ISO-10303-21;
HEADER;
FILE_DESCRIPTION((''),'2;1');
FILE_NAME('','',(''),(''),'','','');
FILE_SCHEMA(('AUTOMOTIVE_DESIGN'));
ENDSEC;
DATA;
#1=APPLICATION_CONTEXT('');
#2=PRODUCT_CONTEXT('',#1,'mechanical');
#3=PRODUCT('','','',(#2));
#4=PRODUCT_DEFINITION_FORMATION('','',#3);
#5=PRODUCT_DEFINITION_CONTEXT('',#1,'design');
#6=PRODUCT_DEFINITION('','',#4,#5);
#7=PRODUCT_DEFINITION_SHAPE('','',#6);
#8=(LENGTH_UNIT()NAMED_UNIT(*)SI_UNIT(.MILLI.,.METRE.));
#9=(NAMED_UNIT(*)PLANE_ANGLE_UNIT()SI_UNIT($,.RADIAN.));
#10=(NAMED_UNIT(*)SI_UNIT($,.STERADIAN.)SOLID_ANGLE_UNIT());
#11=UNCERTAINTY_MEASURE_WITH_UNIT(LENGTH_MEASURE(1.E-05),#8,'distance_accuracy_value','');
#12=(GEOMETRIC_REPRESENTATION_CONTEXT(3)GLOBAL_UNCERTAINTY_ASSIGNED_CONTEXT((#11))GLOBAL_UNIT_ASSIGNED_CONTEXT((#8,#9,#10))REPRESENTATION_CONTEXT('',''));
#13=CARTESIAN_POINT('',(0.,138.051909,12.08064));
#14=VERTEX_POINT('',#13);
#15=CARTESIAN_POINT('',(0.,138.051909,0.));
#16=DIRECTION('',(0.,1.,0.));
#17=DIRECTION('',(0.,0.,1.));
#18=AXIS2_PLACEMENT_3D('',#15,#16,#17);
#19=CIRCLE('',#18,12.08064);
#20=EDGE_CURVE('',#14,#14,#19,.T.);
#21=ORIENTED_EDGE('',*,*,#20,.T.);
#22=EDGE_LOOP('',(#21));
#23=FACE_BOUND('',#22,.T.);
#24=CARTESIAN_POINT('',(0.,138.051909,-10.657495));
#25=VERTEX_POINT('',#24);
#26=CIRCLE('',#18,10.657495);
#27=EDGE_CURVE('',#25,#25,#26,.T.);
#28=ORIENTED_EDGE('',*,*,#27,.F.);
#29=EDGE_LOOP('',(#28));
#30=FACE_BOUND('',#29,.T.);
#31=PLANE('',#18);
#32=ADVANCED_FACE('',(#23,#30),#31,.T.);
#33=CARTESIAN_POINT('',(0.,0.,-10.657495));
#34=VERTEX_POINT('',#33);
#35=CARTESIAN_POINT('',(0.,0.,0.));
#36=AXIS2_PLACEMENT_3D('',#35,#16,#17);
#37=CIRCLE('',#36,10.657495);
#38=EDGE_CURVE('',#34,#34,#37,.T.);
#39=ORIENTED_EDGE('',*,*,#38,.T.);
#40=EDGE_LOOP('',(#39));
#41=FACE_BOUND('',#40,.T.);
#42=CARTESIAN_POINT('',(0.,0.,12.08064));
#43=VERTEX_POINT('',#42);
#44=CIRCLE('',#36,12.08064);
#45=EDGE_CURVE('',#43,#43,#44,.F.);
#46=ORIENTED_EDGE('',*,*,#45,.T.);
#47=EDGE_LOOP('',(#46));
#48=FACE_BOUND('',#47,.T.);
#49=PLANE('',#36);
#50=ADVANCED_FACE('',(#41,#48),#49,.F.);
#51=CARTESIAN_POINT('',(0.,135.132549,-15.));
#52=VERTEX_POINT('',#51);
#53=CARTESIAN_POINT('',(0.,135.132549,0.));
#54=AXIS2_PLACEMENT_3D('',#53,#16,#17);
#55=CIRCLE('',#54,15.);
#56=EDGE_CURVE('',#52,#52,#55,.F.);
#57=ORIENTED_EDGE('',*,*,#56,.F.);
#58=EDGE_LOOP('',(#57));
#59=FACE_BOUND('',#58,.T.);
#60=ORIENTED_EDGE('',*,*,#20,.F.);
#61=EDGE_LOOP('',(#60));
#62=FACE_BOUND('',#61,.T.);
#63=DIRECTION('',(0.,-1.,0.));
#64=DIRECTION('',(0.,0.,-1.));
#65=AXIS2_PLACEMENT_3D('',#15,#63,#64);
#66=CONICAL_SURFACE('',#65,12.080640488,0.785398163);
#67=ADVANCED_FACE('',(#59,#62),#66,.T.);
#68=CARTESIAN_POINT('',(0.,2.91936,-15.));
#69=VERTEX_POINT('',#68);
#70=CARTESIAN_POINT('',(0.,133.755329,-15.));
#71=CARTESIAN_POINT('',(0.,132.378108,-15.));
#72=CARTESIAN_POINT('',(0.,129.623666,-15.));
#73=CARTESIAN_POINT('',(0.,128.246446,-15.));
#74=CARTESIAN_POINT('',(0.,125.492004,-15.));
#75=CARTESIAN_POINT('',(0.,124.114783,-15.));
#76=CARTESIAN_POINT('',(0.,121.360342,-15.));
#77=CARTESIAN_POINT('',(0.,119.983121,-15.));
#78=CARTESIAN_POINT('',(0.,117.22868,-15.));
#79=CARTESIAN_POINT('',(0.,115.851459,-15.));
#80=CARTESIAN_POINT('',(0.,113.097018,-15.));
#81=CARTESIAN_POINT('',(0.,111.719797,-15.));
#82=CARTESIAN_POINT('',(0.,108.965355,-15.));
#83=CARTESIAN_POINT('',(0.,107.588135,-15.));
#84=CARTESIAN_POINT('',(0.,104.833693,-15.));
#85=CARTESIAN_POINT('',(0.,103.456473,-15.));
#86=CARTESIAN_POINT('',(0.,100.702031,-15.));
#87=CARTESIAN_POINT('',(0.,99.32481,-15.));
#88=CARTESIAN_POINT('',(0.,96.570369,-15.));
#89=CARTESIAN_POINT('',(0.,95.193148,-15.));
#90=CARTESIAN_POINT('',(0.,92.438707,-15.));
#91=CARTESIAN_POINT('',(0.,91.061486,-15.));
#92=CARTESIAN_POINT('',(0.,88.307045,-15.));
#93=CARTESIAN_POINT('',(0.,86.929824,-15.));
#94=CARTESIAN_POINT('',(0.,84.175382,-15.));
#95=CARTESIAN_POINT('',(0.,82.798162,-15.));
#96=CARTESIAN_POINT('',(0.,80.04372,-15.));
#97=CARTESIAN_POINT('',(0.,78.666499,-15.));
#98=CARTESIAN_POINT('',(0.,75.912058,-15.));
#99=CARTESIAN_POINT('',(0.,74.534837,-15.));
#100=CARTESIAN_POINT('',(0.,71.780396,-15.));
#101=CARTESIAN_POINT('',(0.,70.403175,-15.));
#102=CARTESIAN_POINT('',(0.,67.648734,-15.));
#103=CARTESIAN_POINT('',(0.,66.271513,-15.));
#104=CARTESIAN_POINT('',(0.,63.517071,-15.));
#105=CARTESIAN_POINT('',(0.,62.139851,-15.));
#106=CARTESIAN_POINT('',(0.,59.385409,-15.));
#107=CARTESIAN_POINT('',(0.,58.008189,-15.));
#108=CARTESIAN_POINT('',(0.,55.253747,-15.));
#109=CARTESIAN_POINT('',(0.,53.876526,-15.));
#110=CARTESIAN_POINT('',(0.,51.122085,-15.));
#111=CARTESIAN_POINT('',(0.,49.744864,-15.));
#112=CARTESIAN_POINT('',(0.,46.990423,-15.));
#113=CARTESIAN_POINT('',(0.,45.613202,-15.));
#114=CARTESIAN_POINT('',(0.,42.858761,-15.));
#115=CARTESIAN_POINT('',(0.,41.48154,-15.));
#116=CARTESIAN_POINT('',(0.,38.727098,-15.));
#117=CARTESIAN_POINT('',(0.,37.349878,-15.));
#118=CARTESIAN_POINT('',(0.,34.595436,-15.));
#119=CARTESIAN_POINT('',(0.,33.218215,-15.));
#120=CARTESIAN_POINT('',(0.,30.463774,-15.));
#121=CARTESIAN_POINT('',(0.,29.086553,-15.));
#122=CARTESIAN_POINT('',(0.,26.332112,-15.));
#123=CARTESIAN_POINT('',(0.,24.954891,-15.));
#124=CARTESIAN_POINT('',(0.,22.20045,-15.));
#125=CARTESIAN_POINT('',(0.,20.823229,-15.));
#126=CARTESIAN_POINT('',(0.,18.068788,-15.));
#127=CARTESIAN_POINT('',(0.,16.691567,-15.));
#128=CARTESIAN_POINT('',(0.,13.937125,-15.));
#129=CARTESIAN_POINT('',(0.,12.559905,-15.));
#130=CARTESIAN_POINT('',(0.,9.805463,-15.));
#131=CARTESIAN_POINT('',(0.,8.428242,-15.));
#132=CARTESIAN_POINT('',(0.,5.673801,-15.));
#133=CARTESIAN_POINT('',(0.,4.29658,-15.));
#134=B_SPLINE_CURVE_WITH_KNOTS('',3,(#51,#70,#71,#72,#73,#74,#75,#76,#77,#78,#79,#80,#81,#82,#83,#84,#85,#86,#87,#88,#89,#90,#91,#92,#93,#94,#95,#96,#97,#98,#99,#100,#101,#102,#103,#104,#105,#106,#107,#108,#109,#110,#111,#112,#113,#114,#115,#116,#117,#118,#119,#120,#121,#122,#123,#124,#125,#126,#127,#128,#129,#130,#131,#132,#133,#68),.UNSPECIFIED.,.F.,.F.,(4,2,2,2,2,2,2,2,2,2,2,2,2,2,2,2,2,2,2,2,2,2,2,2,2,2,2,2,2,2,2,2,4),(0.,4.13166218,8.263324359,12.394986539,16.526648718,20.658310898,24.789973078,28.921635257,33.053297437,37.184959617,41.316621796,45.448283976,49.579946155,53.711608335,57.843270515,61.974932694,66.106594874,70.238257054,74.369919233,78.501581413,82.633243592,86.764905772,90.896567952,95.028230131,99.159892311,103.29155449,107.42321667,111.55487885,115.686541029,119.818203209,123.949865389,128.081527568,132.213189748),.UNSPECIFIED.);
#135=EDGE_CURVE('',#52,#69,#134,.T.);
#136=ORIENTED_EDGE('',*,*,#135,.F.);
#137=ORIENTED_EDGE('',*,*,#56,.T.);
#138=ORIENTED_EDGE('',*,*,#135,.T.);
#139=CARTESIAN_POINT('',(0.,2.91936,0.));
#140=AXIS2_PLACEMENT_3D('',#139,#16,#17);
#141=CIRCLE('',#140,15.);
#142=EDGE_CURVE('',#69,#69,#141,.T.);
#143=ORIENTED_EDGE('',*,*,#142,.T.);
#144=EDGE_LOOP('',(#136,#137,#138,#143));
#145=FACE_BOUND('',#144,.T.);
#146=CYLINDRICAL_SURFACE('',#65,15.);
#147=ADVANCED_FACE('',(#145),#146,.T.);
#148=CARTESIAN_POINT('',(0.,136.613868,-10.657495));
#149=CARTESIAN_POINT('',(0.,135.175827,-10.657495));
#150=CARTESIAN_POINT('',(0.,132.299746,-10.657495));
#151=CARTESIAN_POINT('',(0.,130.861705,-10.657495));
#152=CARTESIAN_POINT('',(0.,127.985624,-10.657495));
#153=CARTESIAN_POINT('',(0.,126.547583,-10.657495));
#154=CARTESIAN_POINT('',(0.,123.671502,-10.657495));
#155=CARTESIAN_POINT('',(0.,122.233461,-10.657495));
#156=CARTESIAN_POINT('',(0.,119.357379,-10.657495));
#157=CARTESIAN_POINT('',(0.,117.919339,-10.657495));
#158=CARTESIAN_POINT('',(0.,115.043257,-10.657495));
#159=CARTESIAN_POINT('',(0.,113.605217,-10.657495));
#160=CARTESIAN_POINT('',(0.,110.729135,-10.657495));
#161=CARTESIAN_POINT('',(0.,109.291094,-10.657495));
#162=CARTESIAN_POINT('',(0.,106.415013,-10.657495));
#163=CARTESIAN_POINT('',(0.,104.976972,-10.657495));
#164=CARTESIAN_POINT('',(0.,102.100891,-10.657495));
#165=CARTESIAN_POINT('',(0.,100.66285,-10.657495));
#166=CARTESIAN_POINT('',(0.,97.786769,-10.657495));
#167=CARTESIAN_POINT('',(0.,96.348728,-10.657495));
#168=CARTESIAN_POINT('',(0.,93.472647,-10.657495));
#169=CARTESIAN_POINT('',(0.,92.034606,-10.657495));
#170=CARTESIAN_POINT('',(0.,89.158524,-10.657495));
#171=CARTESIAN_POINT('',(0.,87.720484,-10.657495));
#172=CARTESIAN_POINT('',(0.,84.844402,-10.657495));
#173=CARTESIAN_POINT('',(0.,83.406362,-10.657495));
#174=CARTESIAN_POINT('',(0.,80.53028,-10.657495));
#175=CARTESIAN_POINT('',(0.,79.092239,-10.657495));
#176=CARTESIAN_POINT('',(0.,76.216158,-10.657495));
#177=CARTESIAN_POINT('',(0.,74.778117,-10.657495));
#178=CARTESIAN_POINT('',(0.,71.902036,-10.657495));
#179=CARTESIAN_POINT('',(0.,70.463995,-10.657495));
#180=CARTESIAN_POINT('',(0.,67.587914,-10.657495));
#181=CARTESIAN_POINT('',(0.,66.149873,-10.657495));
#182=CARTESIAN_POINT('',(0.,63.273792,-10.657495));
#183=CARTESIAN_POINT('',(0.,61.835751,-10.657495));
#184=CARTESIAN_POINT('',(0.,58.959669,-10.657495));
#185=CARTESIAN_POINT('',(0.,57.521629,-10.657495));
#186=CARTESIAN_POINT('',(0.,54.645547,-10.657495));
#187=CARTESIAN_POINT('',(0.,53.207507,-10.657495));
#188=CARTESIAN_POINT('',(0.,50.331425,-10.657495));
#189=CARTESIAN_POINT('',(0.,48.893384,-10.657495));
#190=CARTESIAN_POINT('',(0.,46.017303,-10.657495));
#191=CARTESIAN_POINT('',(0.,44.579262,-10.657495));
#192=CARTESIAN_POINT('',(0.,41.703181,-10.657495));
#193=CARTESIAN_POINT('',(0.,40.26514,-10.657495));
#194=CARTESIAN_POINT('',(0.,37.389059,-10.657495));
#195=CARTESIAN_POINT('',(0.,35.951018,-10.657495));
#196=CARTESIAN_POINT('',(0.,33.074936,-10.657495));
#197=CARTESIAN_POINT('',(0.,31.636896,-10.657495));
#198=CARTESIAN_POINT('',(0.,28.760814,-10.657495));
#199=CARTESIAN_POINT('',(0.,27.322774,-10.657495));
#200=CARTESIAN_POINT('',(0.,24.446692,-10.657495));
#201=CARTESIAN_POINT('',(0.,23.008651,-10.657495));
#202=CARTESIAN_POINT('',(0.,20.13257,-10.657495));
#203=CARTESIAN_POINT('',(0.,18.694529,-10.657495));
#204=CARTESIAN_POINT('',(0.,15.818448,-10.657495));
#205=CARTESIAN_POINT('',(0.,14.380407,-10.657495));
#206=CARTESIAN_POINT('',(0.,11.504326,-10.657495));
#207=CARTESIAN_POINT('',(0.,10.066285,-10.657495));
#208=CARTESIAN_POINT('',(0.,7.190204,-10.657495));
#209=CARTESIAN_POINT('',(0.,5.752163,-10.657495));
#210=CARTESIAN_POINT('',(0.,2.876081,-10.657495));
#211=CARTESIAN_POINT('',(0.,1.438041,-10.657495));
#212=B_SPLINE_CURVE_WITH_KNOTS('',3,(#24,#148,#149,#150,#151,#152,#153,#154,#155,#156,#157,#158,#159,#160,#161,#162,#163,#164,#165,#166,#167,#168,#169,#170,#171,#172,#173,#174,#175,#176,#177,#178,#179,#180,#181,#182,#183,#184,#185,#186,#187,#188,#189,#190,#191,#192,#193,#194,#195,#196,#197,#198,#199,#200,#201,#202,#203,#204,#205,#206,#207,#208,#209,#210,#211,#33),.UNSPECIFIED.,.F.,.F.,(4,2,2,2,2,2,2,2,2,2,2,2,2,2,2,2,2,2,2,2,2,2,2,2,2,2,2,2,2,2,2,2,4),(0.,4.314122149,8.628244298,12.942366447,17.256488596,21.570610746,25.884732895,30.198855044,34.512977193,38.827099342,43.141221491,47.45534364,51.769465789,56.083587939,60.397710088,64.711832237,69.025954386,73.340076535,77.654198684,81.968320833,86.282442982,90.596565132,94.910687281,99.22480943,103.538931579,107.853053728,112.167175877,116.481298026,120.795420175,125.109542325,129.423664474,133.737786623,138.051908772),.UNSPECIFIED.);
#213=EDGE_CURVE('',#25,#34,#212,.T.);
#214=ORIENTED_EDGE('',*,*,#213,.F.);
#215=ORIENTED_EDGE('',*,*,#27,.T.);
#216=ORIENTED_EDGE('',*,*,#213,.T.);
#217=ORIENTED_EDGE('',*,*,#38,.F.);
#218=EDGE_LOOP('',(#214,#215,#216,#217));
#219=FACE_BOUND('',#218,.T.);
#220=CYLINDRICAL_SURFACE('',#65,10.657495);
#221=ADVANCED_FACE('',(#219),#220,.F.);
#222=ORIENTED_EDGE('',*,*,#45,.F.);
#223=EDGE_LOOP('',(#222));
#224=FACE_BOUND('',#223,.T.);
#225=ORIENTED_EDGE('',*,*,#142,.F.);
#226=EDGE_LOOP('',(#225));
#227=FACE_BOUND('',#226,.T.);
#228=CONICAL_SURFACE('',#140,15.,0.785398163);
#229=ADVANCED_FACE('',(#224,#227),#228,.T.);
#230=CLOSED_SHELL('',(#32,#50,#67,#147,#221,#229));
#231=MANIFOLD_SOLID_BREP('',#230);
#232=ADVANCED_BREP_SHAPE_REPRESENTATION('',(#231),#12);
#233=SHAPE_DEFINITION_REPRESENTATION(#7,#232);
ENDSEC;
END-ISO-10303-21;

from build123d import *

# Parameters (mm, degrees)
SKETCH1_R           = 15
BOSS_EXTRUDE1_DEPTH = 138.051908772
SKETCH2_R           = 10.65749531
CUT_EXTRUDE1_DEPTH  = 140.672221703
CHAMFER1_SIZE       = 2.919359512


with BuildPart() as part:
    # Sketch1 → Boss-Extrude1 (new body)
    with BuildSketch(Plane(origin=(0, 0, 0), x_dir=(1, 0, 0), z_dir=(0, 1, 0))):
        Circle(SKETCH1_R)
    extrude(amount=BOSS_EXTRUDE1_DEPTH)

    # Sketch2 → Cut-Extrude1 (cut, through all)
    with BuildSketch(Plane(origin=(0, 0, 0), x_dir=(1, 0, 0), z_dir=(0, 1, 0))):
        Circle(SKETCH2_R)
    extrude(amount=CUT_EXTRUDE1_DEPTH, mode=Mode.SUBTRACT)

    # Chamfer1
    chamfer1_edges = [part.edges().sort_by_distance(p)[0] for p in [
        (-15, 138.051908772, 0),
        (-15, 0, 0),
    ]]
    chamfer(chamfer1_edges, length=CHAMFER1_SIZE)


solid = part.part
